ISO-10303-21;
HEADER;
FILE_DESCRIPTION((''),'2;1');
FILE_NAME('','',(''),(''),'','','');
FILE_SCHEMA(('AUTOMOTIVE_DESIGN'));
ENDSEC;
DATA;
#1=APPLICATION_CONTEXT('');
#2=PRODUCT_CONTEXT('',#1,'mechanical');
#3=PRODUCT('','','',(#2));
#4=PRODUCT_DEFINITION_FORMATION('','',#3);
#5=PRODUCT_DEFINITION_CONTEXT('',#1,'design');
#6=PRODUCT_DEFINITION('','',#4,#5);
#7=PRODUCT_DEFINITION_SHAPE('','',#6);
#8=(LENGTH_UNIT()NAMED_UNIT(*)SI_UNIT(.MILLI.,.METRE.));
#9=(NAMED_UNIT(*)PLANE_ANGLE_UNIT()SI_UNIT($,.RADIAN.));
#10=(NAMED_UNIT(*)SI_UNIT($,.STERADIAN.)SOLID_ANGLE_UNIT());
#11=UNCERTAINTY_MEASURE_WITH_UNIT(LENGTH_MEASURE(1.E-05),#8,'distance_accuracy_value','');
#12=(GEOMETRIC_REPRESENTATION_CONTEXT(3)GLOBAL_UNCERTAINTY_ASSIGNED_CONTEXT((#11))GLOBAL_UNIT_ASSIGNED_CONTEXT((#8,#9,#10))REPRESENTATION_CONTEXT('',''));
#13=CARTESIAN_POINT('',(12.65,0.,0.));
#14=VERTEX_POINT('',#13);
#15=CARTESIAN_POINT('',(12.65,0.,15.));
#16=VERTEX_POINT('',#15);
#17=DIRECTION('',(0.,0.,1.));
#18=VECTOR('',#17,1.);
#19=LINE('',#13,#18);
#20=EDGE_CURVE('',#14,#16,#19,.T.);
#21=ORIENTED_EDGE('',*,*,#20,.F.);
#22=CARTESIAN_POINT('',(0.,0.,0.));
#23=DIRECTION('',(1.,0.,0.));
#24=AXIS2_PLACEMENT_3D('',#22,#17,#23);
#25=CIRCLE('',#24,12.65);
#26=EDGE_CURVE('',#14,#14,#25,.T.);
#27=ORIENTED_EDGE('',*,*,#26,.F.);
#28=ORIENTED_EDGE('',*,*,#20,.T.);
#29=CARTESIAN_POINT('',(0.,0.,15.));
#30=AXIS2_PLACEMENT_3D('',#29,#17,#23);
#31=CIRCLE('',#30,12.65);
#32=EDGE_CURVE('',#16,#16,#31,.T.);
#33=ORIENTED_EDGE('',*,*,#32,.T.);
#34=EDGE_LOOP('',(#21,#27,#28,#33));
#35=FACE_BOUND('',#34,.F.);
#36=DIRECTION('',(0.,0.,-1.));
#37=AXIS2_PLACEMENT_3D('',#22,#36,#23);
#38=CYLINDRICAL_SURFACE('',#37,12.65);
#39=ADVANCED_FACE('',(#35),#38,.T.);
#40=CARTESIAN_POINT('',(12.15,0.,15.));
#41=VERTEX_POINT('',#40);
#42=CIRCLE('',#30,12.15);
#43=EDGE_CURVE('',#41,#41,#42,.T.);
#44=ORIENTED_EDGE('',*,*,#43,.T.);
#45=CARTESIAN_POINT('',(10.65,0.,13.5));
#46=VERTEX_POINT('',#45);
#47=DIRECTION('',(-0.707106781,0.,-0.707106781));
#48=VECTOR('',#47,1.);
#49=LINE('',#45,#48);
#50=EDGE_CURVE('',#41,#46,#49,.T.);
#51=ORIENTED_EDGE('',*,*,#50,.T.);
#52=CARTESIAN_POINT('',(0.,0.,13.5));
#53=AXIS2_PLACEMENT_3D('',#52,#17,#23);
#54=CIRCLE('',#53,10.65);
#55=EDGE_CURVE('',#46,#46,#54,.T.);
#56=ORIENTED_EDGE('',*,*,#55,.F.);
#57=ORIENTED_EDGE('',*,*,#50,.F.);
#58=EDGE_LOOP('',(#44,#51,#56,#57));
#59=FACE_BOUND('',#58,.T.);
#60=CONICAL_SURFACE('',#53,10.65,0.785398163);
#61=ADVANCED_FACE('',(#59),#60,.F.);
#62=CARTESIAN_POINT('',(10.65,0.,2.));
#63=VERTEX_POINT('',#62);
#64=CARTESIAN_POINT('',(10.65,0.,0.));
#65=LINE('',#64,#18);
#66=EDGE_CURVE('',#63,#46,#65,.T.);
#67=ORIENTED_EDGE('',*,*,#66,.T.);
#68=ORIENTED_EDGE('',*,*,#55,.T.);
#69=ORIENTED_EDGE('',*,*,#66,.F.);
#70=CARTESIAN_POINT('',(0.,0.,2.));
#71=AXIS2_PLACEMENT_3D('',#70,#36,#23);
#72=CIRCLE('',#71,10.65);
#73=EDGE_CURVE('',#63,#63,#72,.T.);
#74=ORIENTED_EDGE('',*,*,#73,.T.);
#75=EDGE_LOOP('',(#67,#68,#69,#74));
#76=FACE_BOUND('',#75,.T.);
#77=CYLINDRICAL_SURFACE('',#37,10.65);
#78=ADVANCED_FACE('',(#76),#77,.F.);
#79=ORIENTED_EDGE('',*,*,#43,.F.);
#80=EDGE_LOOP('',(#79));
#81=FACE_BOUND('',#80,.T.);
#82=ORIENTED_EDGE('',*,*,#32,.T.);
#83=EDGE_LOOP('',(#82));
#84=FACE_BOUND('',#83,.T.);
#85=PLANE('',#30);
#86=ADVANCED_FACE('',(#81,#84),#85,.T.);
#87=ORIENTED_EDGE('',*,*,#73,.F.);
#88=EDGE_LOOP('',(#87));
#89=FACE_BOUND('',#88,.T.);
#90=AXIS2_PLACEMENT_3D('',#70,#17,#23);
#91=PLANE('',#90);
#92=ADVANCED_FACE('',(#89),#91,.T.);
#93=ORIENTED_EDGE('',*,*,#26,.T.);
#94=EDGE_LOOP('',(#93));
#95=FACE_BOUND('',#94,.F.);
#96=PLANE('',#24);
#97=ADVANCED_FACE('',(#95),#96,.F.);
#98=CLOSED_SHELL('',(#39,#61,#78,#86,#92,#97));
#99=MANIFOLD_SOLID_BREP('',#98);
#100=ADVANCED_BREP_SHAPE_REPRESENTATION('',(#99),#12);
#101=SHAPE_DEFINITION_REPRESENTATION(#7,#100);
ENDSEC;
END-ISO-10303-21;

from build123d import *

# Parameters (mm, degrees)
F0_R     = 12.65
F1_DEPTH = 15
F2_T     = -2
F3_SIZE  = 1.5


with BuildPart() as f1:
    # F0 (on Top) → F1 (new body)
    with BuildSketch(Plane.XY):
        Circle(F0_R)
    extrude(amount=F1_DEPTH)

    # F2
    f2_openings = [f1.faces().sort_by_distance(p)[0] for p in [
        (0, 0, 15),
    ]]
    offset(amount=F2_T, openings=f2_openings)

    # F3
    f3_edges = [f1.edges().sort_by_distance(p)[0] for p in [
        (-10.65, 0, 15),
    ]]
    chamfer(f3_edges, length=F3_SIZE)


solid = f1.part
